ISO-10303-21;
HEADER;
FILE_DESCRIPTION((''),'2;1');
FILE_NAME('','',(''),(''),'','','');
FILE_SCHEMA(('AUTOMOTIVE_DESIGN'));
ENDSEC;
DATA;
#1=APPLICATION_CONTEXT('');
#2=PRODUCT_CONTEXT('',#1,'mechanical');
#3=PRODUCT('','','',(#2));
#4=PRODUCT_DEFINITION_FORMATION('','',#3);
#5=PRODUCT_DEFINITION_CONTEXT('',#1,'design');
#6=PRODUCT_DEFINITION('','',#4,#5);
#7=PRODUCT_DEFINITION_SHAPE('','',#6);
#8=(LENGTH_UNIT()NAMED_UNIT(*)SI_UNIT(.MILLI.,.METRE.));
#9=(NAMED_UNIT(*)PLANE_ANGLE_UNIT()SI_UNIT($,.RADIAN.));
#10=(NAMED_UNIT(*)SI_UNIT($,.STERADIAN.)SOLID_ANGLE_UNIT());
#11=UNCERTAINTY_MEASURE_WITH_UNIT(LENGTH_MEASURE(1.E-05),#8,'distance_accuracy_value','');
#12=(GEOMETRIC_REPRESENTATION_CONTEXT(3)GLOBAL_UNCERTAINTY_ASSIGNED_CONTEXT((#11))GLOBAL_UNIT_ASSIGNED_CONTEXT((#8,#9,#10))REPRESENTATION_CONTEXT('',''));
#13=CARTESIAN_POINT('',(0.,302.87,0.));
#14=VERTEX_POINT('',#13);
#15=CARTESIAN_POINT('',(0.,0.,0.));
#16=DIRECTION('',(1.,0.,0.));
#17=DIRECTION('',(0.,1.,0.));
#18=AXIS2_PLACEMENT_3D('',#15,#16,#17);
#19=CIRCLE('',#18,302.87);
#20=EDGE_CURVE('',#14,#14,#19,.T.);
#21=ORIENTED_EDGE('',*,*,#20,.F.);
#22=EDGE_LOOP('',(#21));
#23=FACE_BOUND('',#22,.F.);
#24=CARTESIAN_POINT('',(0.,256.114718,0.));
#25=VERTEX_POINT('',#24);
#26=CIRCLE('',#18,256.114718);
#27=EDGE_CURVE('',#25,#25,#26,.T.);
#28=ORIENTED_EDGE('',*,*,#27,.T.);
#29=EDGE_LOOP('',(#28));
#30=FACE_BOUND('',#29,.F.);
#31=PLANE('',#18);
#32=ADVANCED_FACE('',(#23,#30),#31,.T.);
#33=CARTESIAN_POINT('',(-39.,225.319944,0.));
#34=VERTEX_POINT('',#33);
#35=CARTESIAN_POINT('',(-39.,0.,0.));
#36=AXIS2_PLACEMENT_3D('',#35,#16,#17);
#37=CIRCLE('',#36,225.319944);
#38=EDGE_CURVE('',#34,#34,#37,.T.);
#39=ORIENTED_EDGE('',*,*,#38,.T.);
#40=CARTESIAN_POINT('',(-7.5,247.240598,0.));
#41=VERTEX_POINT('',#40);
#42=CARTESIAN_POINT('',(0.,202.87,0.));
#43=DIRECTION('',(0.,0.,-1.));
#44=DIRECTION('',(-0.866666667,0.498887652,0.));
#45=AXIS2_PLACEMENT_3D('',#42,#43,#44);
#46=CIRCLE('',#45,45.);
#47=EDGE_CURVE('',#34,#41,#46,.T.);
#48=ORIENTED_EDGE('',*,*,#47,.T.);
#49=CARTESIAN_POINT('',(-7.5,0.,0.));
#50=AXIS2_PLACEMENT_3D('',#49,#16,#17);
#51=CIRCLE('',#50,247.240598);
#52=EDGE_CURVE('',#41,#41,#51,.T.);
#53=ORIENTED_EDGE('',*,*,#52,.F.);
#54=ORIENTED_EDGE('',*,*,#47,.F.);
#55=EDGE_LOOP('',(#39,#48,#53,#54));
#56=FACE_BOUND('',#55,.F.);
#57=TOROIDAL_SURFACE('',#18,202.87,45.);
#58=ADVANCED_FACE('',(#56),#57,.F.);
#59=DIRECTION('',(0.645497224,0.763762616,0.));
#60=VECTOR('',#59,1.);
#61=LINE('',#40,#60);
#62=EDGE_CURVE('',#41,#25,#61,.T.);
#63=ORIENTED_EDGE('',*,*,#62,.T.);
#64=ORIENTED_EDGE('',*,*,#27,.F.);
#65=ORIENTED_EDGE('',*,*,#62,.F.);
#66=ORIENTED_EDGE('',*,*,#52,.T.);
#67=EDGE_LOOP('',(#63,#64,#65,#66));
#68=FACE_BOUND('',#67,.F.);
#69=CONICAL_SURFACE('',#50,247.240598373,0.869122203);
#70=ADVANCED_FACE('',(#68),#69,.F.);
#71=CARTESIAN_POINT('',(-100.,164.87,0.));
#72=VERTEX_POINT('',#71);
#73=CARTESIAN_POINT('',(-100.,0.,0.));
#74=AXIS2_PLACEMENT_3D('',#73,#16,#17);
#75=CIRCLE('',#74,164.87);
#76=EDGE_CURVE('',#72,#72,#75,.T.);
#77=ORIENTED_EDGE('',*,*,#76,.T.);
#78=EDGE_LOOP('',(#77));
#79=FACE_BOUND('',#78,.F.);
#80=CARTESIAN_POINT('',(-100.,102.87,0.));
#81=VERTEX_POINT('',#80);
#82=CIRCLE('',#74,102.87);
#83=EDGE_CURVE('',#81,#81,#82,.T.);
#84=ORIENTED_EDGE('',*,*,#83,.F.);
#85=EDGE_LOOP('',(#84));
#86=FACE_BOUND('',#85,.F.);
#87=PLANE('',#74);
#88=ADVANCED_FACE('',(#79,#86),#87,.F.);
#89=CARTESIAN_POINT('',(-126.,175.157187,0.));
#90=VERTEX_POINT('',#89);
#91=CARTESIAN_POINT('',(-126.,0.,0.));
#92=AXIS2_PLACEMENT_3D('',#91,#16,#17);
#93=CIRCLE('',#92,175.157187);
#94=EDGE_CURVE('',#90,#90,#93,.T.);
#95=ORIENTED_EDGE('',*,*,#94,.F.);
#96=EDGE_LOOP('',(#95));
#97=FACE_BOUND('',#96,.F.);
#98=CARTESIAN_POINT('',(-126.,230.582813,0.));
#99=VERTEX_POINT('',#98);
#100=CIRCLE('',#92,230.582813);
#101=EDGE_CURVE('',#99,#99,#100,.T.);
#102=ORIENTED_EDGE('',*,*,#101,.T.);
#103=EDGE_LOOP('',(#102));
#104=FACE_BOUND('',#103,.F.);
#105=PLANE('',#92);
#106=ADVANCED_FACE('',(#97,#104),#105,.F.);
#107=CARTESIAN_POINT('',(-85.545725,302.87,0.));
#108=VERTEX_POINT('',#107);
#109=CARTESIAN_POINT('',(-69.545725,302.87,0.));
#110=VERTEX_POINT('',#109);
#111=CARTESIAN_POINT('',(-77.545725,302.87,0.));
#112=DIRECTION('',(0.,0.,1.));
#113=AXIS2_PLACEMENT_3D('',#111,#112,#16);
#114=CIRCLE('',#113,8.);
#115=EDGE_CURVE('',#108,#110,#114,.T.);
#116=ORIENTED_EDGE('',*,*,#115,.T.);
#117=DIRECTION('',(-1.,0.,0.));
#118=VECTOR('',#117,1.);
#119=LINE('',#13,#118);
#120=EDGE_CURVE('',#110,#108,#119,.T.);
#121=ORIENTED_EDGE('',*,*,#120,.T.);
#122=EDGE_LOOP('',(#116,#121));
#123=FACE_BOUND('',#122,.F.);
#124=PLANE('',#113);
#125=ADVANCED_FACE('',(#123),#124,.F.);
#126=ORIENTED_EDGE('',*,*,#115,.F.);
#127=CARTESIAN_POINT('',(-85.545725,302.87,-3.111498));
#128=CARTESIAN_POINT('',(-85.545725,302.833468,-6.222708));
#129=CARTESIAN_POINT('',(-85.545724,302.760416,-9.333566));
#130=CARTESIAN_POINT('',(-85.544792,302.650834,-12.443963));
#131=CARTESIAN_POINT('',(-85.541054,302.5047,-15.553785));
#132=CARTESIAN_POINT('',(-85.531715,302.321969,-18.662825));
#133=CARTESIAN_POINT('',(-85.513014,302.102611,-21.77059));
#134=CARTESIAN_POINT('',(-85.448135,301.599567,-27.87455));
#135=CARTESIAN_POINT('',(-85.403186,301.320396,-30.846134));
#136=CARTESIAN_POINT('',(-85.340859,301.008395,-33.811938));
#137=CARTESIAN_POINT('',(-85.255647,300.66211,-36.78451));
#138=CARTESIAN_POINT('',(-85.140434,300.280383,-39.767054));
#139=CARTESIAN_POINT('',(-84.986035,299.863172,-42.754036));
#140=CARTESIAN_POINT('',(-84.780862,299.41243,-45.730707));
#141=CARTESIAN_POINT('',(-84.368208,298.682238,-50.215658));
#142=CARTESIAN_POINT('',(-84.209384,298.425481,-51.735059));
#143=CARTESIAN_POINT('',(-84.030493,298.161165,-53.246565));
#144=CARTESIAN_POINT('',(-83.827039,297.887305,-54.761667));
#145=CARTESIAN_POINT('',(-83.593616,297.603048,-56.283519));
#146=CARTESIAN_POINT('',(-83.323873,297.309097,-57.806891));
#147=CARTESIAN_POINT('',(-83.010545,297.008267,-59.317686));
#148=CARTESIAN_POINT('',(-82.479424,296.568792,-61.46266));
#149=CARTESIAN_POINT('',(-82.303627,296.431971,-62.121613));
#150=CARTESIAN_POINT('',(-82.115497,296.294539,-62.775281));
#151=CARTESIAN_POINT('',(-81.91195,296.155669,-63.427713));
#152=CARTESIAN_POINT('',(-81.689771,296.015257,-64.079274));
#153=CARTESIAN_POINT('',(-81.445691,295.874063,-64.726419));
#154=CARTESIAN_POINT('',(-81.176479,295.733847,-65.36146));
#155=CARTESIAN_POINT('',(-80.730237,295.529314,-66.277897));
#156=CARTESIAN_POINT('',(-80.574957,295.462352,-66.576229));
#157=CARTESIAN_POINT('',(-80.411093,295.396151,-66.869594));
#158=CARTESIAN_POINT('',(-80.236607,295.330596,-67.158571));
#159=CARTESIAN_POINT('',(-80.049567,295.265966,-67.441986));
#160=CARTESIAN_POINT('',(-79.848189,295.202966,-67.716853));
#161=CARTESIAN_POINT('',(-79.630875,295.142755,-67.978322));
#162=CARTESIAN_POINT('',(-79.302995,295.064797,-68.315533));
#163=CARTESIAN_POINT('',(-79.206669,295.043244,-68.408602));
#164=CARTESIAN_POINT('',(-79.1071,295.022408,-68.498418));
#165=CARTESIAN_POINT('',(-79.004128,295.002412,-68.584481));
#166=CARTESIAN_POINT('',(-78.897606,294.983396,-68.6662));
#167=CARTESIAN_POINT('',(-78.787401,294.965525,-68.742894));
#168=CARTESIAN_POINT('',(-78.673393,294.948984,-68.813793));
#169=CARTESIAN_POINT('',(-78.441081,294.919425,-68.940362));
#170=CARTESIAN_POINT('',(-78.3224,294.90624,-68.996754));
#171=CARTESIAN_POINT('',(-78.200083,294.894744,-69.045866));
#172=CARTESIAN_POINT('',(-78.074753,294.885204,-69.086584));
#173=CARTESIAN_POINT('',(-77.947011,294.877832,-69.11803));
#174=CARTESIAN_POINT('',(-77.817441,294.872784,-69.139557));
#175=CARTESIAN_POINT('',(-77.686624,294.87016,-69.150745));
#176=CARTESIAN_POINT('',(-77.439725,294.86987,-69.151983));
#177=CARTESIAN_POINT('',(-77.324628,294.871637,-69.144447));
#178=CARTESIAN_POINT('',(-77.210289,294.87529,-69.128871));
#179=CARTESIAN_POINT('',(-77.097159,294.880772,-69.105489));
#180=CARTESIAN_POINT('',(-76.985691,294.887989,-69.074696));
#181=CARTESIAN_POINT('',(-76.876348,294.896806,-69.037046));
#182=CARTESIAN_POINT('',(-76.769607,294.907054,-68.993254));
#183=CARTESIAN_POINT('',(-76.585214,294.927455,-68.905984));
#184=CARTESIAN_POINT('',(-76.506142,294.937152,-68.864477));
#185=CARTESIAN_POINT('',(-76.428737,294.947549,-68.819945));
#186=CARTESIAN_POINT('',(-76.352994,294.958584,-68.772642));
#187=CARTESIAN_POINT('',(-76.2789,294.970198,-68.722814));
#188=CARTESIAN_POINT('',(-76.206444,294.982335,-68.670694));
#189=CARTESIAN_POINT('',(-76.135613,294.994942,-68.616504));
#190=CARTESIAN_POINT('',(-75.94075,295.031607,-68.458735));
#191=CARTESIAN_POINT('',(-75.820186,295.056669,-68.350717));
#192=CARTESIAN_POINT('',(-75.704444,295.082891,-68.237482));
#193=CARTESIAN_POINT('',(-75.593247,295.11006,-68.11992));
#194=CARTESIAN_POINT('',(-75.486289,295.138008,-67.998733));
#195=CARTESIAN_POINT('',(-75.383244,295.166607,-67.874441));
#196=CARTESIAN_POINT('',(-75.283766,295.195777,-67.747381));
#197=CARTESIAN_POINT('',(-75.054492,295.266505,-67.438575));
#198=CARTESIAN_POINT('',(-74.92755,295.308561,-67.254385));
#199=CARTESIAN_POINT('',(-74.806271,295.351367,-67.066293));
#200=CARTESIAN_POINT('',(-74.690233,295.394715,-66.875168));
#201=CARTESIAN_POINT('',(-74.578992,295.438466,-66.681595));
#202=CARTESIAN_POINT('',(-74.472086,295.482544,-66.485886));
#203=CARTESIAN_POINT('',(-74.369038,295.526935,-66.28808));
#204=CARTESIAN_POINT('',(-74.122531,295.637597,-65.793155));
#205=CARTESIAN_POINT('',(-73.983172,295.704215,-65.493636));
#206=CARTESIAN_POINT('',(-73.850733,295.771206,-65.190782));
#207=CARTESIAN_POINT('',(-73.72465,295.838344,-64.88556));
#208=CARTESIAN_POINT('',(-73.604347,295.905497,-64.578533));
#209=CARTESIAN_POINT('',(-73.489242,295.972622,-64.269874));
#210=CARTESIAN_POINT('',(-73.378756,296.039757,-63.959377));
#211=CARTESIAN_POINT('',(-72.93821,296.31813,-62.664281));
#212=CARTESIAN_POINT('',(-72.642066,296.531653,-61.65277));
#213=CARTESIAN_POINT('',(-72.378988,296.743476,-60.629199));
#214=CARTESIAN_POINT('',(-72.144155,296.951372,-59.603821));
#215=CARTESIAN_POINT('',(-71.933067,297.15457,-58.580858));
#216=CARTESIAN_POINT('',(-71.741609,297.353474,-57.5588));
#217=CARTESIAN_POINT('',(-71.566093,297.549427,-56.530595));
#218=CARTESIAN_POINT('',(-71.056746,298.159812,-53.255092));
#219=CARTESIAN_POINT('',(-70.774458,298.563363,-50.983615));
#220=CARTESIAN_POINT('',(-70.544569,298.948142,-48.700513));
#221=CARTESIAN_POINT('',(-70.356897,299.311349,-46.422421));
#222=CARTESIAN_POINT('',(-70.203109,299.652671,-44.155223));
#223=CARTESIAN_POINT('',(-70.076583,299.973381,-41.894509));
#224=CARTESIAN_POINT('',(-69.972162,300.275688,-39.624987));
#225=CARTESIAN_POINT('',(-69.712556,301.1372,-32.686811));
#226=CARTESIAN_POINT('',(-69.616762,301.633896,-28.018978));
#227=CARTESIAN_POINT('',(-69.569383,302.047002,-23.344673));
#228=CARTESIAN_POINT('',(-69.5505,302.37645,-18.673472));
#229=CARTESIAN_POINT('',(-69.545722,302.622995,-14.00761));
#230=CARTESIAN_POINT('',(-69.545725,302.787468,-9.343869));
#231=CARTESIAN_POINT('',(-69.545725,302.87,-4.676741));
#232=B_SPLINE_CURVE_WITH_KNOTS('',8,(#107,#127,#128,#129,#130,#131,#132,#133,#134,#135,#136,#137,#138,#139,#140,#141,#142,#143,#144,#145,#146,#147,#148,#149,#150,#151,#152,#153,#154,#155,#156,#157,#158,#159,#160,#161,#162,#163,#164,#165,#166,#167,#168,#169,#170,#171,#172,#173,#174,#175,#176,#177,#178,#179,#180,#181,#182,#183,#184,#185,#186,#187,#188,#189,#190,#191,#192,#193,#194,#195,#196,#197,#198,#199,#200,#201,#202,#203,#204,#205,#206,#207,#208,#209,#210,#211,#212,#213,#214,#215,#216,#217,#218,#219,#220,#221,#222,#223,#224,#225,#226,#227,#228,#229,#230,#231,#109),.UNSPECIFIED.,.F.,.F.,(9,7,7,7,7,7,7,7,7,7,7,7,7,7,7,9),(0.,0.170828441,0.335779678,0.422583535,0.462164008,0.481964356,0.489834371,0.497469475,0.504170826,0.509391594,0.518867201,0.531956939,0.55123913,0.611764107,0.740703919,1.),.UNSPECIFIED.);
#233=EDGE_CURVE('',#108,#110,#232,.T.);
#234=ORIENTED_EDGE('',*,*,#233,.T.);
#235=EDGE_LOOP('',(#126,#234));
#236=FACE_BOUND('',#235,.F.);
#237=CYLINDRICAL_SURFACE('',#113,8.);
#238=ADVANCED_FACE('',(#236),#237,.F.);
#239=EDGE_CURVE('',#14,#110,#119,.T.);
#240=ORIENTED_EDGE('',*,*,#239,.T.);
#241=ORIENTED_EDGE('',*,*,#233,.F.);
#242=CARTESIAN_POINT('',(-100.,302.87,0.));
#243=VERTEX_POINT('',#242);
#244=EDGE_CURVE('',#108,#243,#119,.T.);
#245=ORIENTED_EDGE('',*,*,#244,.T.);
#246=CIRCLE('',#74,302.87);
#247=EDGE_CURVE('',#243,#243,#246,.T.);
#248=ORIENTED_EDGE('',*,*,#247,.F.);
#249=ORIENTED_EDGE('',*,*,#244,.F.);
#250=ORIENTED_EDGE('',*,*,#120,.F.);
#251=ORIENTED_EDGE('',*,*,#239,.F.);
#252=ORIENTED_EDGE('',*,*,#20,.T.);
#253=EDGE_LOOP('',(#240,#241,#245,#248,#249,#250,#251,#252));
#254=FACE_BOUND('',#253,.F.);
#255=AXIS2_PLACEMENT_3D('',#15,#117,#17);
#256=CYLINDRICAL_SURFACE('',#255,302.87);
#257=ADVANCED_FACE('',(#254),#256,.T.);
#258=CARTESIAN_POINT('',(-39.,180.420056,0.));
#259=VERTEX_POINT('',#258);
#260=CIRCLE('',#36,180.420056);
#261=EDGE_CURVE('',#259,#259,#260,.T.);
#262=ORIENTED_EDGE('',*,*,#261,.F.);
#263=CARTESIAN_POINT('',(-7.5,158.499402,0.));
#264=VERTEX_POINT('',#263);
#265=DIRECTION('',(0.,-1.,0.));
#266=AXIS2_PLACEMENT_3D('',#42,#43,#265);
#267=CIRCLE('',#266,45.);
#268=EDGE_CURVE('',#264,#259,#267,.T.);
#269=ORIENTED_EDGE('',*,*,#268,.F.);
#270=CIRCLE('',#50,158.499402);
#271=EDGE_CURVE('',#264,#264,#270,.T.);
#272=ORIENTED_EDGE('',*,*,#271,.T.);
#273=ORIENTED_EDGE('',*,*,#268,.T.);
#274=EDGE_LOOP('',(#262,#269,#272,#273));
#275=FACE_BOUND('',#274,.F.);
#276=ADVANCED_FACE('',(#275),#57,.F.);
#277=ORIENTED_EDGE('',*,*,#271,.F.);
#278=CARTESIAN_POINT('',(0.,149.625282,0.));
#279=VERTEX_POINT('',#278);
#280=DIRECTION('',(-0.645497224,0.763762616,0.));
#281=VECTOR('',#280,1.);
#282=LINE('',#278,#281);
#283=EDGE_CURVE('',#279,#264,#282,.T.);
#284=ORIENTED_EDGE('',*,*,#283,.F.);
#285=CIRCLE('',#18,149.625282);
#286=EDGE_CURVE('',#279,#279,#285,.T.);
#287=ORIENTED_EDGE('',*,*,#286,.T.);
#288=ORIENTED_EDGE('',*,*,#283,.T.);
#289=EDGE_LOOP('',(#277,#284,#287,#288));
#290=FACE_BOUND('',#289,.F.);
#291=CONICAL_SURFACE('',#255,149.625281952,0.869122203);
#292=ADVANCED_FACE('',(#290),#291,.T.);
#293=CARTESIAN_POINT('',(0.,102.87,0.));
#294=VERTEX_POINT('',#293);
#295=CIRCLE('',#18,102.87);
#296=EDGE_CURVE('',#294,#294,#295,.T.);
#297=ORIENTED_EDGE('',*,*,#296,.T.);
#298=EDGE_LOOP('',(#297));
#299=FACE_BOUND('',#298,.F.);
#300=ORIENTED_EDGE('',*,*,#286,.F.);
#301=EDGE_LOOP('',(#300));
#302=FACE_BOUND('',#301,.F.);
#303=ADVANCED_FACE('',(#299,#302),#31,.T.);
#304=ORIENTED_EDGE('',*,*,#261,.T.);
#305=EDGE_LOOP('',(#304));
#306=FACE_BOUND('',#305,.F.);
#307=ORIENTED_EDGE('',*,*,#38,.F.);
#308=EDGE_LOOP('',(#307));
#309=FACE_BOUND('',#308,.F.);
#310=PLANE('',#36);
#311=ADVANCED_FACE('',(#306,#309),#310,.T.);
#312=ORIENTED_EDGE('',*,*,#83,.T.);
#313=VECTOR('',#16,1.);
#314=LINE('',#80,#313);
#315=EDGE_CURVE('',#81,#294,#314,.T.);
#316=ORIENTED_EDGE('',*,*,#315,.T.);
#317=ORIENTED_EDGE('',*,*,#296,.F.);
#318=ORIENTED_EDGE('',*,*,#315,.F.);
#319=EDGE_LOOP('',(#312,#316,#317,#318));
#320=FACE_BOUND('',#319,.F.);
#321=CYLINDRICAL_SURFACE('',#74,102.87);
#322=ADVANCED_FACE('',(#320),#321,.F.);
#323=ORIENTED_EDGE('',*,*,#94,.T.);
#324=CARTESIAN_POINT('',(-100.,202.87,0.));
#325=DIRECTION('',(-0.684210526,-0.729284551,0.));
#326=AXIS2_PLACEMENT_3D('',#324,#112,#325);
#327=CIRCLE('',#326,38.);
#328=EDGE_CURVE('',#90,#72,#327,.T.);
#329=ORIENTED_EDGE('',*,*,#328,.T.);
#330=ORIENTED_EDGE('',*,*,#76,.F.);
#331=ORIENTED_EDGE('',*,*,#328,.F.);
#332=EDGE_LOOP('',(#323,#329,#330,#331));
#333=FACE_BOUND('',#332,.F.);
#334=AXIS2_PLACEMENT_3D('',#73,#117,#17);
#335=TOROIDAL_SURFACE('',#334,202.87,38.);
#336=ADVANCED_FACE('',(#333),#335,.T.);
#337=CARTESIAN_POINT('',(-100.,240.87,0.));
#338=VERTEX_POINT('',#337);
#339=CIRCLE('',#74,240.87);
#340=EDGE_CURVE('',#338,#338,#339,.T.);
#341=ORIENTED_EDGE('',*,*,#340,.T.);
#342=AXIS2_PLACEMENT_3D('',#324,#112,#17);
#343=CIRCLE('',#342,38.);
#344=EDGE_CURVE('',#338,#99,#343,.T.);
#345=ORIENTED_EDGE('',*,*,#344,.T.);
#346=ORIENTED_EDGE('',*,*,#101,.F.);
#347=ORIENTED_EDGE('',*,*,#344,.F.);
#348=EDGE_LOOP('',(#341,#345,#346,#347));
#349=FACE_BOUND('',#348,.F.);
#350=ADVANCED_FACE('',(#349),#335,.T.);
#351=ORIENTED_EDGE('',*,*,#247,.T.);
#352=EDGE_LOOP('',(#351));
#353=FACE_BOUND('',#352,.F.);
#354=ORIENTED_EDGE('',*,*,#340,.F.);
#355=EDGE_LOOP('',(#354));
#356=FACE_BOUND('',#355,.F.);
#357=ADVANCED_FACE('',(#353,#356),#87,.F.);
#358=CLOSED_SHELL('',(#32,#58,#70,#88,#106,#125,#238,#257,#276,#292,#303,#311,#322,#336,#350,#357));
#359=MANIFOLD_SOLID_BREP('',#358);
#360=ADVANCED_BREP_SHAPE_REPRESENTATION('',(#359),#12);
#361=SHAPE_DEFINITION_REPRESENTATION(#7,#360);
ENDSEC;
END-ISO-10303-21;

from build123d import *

# Parameters (mm, degrees)
F4_D     = 16
F4_DEPTH = 302.871


# Not quite as in the source:
# - a fillet or chamfer that OpenCascade refuses, or shapes differently, is made with other operations: its cross-section is extruded or revolved along the edge and cut away or added


with BuildPart() as f1:
    # F0 (on Top) → F1 (revolve)
    with BuildSketch(Plane.XY):
        with BuildLine():
            Line((0, 302.87), (-100, 302.87))
            Line((-100, 302.87), (-100, 240.87))
            ThreePointArc((-100, 240.87), (-113.9805777598, 238.2047342639), (-126, 230.5828129211))
            Line((-126, 230.5828129211), (-126, 175.1571870789))
            ThreePointArc((-126, 175.1571870789), (-113.9805777598, 167.5352657361), (-100, 164.87))
            Line((-100, 164.87), (-100, 102.87))
            Line((-100, 102.87), (0, 102.87))
            Line((0, 102.87), (0, 157.87))
            ThreePointArc((0, 157.87), (-22.5250139353, 163.9133093395), (-39, 180.4200556794))
            Line((-39, 180.4200556794), (-39, 225.3199443206))
            ThreePointArc((-39, 225.3199443206), (-22.5250139353, 241.8266906605), (0, 247.87))
            Line((0, 247.87), (0, 302.87))
        make_face()
    revolve(axis=Axis((-229.3646931648, 0, 0), (1, 0, 0)))

    # F2: chamfer of 9 on 2 edges, made by hand

    # F2_s1 → F2_t2 (revolve, cut)
    with BuildSketch(Plane.XY):
        with BuildLine():
            Line((-7.5, 247.2405983732), (0, 256.1147180479))
            Line((0, 256.1147180479), (0, 247.87))
            ThreePointArc((0, 247.87), (-3.8908074648, 247.7014802039), (-7.5, 247.2405983732))
        make_face()
    revolve(axis=Axis((0, 0, 0), (1, 0, 0)), mode=Mode.SUBTRACT)

    # F2_s3 → F2_t4 (revolve, cut)
    with BuildSketch(Plane.XY):
        with BuildLine():
            Line((0, 149.6252819521), (-7.5, 158.4994016268))
            ThreePointArc((-7.5, 158.4994016268), (-3.8908074648, 158.0385197961), (0, 157.87))
            Line((0, 157.87), (0, 149.6252819521))
        make_face()
    revolve(axis=Axis((0, 0, 0), (1, 0, 0)), mode=Mode.SUBTRACT)

    # F4 (through all, one way)
    with BuildSketch(Plane.XY):
        with Locations((-77.5457248092, 302.87)):
            Circle(F4_D / 2)
    extrude(amount=-F4_DEPTH, mode=Mode.SUBTRACT)


solid = f1.part
